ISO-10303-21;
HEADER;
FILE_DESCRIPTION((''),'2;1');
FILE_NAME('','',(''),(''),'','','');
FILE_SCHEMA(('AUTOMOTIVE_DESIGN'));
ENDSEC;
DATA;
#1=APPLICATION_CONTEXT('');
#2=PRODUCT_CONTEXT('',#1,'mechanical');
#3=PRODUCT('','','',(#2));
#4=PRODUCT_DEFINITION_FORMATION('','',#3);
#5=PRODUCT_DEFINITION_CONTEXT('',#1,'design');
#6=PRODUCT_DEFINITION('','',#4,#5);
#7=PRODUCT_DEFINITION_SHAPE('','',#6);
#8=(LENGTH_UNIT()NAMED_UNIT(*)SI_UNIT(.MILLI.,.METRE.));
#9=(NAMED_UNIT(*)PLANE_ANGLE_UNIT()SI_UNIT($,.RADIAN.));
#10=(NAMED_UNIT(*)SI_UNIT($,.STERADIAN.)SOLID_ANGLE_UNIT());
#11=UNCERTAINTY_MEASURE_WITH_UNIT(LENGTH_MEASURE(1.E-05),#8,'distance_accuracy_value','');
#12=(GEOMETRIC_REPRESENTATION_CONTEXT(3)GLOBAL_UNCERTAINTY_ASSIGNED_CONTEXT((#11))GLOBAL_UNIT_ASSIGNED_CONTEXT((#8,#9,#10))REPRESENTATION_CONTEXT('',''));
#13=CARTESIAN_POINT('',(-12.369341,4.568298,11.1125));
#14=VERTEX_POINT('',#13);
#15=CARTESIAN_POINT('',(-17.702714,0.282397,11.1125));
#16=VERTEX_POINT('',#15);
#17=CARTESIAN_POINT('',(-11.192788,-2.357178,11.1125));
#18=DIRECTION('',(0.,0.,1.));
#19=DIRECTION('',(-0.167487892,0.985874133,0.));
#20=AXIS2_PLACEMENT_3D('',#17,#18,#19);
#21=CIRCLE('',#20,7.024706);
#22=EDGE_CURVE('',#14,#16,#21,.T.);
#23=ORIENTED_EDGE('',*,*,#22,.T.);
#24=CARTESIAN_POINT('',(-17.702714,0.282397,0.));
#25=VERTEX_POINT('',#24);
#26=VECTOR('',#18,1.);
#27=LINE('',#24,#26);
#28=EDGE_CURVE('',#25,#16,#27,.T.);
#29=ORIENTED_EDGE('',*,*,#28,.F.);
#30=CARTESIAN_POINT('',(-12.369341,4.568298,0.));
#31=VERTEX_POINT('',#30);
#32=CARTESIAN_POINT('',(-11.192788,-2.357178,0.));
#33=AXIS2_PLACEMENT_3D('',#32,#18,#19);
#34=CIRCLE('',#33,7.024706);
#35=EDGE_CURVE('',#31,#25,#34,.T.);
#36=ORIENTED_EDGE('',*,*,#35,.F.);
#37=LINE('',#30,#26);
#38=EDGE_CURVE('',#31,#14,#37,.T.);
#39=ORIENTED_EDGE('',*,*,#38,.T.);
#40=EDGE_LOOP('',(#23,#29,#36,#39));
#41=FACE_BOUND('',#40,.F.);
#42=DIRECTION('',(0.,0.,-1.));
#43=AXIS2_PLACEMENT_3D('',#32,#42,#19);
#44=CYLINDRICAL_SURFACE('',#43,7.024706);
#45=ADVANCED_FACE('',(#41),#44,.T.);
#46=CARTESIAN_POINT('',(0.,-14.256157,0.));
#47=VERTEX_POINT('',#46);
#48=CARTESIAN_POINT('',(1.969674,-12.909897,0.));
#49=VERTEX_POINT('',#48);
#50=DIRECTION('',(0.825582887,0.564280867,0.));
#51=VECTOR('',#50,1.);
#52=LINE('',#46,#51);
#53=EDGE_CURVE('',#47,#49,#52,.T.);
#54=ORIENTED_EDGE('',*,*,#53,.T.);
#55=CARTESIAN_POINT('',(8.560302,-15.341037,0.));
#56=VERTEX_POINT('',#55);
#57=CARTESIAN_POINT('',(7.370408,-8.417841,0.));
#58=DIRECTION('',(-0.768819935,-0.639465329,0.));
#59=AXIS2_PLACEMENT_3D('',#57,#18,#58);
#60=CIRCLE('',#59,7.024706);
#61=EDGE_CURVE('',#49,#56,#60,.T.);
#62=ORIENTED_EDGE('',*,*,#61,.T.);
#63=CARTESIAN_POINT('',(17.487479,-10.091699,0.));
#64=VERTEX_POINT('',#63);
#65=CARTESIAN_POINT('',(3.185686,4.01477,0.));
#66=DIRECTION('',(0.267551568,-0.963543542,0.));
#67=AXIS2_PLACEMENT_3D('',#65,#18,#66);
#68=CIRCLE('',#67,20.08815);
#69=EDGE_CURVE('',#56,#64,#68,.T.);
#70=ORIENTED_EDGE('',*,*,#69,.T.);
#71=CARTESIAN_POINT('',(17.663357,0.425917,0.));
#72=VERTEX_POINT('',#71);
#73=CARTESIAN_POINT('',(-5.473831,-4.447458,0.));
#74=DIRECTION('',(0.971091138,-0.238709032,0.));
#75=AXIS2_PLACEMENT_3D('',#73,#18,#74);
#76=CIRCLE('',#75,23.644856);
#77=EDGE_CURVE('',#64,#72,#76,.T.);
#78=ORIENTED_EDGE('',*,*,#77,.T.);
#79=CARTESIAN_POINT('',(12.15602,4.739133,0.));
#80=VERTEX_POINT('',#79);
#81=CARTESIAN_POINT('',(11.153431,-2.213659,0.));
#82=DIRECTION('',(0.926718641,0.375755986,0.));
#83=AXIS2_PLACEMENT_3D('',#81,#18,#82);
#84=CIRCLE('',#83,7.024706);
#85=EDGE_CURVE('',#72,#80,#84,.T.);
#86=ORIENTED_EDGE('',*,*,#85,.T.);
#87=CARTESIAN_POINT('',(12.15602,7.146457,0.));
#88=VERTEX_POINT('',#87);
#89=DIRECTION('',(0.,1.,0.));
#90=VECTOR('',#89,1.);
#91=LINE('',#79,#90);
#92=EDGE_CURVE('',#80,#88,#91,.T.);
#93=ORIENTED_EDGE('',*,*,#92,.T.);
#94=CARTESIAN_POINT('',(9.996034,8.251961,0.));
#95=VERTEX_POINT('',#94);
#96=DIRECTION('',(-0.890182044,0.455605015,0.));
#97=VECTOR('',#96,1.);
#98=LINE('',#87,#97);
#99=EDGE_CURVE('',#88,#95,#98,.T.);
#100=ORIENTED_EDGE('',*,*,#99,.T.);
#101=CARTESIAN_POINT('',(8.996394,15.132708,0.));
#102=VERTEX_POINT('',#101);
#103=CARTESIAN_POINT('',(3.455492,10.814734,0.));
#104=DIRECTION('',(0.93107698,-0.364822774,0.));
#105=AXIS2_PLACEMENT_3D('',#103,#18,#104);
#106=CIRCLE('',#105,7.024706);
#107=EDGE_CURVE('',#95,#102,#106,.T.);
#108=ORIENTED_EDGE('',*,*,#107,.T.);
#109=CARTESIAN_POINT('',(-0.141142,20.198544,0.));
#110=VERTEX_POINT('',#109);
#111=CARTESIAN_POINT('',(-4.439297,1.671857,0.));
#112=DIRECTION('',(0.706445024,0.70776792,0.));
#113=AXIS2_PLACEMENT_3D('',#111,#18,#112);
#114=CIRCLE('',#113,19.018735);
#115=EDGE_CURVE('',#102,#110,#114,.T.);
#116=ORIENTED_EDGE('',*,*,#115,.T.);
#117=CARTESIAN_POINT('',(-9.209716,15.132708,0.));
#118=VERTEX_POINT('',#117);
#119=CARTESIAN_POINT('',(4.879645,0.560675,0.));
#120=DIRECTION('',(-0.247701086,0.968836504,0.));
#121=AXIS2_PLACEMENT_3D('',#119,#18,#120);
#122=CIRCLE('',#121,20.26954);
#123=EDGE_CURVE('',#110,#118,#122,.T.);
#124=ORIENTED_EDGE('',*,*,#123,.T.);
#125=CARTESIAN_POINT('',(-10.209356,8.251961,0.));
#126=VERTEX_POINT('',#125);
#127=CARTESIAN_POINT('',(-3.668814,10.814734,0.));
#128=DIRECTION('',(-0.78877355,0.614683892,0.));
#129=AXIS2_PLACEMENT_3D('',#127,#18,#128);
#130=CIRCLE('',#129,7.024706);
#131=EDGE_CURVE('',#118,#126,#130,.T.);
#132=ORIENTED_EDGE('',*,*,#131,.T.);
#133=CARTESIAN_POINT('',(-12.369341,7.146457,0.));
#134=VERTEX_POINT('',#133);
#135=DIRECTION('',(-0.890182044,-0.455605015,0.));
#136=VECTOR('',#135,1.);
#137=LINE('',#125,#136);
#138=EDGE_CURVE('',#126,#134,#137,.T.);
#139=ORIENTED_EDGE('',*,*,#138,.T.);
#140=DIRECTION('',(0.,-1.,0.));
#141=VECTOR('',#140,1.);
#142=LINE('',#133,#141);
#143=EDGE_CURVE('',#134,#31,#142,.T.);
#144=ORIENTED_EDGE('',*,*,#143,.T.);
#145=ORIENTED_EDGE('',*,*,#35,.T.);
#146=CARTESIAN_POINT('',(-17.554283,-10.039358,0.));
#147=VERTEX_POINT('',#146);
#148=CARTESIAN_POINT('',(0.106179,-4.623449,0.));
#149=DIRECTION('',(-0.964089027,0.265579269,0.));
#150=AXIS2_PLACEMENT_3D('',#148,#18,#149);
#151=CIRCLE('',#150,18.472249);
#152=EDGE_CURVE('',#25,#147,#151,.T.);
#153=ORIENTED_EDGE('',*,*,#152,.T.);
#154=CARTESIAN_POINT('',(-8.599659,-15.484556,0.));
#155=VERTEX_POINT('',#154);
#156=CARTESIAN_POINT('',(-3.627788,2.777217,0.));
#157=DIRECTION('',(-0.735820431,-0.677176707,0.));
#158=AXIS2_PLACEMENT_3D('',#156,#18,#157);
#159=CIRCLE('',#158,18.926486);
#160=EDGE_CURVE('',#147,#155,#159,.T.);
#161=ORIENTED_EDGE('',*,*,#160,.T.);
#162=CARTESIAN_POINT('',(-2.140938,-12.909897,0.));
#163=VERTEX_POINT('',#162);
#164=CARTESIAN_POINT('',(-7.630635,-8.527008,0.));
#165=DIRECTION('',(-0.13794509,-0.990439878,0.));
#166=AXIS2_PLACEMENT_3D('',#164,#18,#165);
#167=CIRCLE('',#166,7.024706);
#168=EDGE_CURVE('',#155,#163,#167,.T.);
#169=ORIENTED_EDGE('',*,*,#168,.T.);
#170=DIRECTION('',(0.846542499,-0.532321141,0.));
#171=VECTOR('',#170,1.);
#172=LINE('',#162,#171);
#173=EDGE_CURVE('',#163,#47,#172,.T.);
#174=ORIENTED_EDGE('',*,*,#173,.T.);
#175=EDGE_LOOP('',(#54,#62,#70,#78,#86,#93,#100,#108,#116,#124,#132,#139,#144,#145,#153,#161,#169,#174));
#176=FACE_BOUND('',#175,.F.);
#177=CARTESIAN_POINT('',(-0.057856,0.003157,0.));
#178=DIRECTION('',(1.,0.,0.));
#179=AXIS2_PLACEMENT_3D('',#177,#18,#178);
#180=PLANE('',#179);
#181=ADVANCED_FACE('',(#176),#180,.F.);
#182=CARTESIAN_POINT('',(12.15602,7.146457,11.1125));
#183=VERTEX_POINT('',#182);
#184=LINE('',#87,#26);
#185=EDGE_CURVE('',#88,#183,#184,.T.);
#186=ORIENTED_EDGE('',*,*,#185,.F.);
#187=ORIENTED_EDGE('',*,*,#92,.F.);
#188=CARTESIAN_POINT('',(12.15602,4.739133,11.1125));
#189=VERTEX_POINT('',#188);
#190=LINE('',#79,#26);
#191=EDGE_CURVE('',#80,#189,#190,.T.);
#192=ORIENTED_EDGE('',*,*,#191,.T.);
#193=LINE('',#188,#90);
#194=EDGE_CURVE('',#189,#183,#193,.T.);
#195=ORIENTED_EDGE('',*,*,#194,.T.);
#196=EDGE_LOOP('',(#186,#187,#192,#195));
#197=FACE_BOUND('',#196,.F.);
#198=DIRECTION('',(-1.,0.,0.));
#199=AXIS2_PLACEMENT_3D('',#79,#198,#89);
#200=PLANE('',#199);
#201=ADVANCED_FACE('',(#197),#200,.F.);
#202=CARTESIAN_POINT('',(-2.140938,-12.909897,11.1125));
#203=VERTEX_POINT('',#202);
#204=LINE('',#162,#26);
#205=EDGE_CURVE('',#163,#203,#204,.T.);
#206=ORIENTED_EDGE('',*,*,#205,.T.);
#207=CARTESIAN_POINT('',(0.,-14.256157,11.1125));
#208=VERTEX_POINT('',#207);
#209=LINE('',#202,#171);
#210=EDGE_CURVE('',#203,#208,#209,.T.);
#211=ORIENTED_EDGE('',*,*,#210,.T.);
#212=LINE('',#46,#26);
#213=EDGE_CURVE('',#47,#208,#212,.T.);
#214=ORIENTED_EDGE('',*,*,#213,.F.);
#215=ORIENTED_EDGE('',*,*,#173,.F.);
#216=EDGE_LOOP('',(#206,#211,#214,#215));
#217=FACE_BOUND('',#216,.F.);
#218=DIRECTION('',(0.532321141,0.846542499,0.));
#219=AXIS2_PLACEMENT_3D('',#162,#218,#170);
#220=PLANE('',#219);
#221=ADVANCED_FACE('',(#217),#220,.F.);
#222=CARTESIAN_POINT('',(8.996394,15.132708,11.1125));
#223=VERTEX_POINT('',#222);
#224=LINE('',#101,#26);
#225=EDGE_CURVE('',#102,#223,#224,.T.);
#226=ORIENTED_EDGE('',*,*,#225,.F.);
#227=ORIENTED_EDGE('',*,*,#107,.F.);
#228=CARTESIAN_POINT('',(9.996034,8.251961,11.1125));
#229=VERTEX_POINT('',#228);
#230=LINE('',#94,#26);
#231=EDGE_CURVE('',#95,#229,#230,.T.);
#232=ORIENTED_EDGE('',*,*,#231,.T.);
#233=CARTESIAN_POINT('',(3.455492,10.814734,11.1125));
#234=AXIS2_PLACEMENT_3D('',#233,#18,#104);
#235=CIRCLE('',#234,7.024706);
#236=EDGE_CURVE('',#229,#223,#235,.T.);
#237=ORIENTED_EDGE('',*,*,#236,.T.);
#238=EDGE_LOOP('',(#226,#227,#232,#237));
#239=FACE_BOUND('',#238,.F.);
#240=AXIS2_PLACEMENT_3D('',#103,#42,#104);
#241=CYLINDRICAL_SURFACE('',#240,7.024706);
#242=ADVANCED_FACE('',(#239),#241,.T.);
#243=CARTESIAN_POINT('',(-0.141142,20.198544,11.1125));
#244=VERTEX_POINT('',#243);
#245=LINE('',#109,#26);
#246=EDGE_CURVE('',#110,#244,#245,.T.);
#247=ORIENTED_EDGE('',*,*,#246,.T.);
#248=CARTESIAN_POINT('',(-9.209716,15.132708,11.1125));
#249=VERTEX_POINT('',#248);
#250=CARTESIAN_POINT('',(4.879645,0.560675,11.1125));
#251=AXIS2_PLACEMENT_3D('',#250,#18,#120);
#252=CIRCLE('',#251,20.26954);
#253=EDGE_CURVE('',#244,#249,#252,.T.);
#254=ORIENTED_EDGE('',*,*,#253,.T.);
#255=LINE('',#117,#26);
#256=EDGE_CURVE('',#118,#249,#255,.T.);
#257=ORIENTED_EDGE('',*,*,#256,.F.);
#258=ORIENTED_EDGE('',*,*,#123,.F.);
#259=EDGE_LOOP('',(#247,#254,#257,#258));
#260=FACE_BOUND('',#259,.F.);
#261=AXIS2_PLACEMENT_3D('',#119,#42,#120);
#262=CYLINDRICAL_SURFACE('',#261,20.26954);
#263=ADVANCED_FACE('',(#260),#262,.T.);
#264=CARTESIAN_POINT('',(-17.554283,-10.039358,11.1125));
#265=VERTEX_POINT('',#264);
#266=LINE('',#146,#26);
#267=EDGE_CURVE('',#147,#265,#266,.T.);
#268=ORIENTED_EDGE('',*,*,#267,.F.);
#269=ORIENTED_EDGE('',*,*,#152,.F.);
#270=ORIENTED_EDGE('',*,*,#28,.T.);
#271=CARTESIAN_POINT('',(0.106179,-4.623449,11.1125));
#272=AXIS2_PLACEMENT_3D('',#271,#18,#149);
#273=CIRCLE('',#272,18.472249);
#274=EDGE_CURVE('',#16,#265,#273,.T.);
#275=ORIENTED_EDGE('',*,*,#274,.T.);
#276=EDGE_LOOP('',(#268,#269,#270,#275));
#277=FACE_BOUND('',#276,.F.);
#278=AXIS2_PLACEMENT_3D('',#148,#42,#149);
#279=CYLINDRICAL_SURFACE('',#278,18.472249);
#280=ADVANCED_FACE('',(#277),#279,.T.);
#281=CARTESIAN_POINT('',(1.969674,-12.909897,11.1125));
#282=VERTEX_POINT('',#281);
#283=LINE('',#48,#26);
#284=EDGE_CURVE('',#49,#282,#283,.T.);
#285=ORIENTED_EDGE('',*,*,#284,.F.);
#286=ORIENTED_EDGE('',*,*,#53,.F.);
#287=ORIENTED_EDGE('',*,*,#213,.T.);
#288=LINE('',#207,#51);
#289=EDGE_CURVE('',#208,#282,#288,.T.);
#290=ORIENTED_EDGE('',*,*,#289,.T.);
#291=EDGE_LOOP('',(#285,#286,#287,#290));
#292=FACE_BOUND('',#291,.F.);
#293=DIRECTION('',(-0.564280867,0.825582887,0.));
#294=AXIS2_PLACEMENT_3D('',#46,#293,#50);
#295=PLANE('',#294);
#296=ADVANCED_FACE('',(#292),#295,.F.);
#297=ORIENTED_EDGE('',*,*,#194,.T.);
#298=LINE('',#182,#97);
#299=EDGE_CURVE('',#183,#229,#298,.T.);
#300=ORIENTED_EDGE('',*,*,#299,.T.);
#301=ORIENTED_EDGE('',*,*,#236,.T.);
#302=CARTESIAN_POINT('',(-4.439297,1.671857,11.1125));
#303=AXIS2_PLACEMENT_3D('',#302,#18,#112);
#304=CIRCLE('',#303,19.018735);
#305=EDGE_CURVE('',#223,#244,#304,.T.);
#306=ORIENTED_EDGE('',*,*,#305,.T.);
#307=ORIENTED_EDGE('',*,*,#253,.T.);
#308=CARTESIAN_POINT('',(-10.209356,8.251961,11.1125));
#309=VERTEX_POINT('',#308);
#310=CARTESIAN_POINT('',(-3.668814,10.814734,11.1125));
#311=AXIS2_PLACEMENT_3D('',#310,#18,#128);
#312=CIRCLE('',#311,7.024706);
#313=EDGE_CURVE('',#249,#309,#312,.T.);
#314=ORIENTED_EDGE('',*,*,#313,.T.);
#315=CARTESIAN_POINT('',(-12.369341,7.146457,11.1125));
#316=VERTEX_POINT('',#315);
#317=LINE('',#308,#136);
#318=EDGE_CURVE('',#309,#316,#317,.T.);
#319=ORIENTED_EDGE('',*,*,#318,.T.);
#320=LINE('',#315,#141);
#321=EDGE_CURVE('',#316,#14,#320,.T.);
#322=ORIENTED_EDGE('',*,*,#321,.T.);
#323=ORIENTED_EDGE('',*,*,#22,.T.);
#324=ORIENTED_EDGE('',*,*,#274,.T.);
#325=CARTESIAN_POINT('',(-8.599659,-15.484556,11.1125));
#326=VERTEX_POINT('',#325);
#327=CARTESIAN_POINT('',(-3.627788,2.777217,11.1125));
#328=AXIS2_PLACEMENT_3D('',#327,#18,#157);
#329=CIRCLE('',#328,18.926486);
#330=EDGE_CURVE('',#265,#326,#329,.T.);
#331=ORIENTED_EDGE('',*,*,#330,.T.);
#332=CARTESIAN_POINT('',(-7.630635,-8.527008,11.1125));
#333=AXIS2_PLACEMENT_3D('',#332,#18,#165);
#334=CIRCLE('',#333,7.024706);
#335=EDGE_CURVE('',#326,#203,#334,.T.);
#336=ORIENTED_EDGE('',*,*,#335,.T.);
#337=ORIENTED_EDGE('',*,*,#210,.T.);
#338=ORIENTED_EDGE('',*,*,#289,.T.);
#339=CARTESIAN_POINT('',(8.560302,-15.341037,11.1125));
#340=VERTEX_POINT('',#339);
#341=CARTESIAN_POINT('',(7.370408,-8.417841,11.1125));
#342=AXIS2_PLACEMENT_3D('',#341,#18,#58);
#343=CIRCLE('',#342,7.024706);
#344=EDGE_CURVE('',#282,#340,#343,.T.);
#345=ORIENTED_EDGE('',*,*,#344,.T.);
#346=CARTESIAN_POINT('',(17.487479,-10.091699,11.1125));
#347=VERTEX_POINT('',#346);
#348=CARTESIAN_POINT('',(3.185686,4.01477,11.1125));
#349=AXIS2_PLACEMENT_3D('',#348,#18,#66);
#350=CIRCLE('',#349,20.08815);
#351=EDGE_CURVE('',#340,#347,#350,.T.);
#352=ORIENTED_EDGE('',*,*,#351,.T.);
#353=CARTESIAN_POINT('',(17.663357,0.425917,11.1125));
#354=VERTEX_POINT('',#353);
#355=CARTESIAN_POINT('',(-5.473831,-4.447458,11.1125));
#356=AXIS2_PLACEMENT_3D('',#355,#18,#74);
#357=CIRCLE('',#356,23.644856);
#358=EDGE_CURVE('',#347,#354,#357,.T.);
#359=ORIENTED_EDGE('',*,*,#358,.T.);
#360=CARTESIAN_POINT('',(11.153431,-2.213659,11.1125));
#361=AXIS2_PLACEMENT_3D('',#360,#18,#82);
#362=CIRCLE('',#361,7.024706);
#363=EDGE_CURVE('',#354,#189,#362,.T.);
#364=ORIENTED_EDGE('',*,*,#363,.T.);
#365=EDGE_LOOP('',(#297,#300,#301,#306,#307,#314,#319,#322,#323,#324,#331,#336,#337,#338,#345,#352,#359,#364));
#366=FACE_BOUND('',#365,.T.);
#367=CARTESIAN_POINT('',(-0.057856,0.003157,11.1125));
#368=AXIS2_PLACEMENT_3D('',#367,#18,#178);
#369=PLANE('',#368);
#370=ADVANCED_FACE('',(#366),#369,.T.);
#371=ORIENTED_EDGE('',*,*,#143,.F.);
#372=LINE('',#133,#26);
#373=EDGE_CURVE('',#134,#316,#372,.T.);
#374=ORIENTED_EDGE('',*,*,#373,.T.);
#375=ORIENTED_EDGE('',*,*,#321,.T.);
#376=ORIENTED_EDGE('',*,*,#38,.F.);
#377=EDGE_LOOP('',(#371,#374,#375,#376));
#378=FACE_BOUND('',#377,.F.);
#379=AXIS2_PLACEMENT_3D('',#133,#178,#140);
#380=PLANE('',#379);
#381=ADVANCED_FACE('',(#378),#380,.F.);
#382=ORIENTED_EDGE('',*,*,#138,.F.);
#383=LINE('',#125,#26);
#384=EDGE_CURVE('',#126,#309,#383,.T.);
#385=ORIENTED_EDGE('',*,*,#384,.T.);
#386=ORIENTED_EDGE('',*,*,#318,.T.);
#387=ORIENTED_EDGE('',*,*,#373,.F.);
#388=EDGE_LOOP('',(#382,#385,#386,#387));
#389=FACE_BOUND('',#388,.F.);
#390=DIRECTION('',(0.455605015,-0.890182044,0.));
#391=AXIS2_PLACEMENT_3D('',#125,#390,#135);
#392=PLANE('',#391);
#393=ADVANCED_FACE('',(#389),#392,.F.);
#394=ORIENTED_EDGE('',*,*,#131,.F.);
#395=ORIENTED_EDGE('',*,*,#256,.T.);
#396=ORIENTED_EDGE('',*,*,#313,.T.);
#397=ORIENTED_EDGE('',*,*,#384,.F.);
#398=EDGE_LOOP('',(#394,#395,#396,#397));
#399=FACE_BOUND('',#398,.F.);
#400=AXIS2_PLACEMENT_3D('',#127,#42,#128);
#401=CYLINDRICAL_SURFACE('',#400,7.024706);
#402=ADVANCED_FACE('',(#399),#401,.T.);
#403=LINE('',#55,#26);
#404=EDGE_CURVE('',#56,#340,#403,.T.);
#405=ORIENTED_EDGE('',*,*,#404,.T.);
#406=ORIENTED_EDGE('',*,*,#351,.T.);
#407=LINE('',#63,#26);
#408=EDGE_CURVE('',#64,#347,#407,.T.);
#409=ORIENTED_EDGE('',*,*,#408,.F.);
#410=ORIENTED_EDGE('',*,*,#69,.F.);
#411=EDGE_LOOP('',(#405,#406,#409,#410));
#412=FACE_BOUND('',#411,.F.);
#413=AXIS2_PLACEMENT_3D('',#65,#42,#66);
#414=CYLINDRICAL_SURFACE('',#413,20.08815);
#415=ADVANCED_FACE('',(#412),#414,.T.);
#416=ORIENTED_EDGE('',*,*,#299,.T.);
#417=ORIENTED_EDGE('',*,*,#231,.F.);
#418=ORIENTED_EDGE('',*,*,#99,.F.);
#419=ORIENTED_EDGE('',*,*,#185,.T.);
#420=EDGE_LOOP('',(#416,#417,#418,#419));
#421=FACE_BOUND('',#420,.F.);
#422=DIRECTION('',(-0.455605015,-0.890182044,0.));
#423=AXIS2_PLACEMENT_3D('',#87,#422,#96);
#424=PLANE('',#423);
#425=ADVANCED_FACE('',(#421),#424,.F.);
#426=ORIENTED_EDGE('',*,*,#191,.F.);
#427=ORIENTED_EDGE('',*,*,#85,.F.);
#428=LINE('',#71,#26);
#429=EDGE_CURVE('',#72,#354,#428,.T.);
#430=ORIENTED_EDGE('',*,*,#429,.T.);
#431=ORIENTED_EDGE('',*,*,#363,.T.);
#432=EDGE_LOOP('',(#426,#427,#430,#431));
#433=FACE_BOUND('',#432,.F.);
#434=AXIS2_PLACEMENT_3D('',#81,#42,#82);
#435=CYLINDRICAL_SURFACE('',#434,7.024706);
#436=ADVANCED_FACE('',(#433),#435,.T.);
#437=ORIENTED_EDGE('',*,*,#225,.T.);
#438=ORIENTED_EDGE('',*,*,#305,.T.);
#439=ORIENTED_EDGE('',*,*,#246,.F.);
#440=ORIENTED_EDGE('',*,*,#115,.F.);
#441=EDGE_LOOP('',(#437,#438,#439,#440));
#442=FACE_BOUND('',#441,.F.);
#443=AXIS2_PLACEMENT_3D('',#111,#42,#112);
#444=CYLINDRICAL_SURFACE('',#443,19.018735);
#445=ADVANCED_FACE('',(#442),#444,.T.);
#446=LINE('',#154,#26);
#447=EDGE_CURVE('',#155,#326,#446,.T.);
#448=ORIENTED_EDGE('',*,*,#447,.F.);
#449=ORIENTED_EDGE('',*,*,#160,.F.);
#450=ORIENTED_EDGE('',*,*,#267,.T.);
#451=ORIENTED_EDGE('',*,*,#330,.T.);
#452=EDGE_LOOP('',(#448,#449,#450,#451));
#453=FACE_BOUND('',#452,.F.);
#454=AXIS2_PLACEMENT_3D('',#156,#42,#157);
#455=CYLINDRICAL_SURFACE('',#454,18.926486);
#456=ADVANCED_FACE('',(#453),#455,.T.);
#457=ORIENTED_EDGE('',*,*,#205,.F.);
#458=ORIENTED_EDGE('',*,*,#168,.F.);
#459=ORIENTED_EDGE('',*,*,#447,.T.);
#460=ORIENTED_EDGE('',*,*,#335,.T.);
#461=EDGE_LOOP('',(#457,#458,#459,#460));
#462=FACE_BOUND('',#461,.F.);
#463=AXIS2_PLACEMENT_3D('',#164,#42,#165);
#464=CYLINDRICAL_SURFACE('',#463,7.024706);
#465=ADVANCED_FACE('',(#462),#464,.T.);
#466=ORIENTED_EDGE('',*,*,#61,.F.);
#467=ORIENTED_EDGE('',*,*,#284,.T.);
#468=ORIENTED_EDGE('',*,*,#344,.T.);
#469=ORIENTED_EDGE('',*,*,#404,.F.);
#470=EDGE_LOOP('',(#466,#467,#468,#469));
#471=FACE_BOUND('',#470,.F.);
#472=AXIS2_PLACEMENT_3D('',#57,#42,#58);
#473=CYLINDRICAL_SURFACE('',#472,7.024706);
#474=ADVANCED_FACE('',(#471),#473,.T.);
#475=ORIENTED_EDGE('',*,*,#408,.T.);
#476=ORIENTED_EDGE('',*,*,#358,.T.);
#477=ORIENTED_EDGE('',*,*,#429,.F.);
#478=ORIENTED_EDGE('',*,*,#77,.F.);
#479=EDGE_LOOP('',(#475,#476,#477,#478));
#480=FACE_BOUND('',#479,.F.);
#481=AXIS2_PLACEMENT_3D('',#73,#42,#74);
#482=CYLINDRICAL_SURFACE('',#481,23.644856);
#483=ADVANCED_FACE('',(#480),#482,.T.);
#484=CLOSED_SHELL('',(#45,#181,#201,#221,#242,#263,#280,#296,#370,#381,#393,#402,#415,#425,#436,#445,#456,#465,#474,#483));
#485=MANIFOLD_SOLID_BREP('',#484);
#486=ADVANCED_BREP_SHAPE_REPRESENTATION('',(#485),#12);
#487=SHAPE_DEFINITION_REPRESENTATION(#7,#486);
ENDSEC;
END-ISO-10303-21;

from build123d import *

# Parameters (mm, degrees)
F1_DEPTH = 11.1125


# Not quite as in the source:
# - a length typed as a fraction of an inch, garbled in the dataset ("3 / 203.2 mm" for 3/8 in), is restored


with BuildPart() as f1:
    # F0 (on Top) → F1 (new body)
    with BuildSketch(Plane.XY):
        with BuildLine():
            ThreePointArc((-0.1411418198, 20.1985444874), (-5.0054503986, 18.2564119782), (-9.2097157612, 15.1327075437))
            ThreePointArc((-9.2097157612, 15.1327075437), (-10.6205392688, 11.8246856933), (-10.2093555033, 8.2519613206))
            Line((-10.2093555033, 8.2519613206), (-12.369341217, 7.1464567445))
            Line((-12.369341217, 7.1464567445), (-12.369341217, 4.6386048198))
            Line((-12.369341217, 4.6386048198), (-12.369341217, 4.5682978211))
            ThreePointArc((-12.369341217, 4.5682978211), (-15.5930977879, 3.1185654947), (-17.7027139134, 0.2823972963))
            ThreePointArc((-17.7027139134, 0.2823972963), (-18.3641606661, -4.889059653), (-17.5542831421, -10.0393583998))
            ThreePointArc((-17.5542831421, -10.0393583998), (-13.4613837791, -13.3941238354), (-8.5996589687, -15.484556372))
            ThreePointArc((-8.5996589687, -15.484556372), (-5.0294162563, -15.0523544446), (-2.1409380715, -12.9098966718))
            Line((-2.1409380715, -12.9098966718), (0, -14.2561570176))
            Line((0, -14.2561570176), (1.9696742658, -12.9098966718))
            ThreePointArc((1.9696742658, -12.9098966718), (4.9392756736, -15.0084468105), (8.560301624, -15.3410370587))
            ThreePointArc((8.560301624, -15.3410370587), (13.367982191, -13.3015402533), (17.4874793738, -10.0916987285))
            ThreePointArc((17.4874793738, -10.0916987285), (18.16772005, -4.8427956267), (17.6633565687, 0.4259166096))
            ThreePointArc((17.6633565687, 0.4259166096), (15.4847616458, 3.3168082822), (12.1560195839, 4.739132713))
            Line((12.1560195839, 4.739132713), (12.1560195839, 7.1464567445))
            Line((12.1560195839, 7.1464567445), (9.9960338703, 8.2519613206))
            ThreePointArc((9.9960338703, 8.2519613206), (10.4072176357, 11.8246856933), (8.9963941282, 15.1327075437))
            ThreePointArc((8.9963941282, 15.1327075437), (4.7823081966, 18.3053860292), (-0.1411418198, 20.1985444874))
        make_face()
    extrude(amount=F1_DEPTH)


solid = f1.part
